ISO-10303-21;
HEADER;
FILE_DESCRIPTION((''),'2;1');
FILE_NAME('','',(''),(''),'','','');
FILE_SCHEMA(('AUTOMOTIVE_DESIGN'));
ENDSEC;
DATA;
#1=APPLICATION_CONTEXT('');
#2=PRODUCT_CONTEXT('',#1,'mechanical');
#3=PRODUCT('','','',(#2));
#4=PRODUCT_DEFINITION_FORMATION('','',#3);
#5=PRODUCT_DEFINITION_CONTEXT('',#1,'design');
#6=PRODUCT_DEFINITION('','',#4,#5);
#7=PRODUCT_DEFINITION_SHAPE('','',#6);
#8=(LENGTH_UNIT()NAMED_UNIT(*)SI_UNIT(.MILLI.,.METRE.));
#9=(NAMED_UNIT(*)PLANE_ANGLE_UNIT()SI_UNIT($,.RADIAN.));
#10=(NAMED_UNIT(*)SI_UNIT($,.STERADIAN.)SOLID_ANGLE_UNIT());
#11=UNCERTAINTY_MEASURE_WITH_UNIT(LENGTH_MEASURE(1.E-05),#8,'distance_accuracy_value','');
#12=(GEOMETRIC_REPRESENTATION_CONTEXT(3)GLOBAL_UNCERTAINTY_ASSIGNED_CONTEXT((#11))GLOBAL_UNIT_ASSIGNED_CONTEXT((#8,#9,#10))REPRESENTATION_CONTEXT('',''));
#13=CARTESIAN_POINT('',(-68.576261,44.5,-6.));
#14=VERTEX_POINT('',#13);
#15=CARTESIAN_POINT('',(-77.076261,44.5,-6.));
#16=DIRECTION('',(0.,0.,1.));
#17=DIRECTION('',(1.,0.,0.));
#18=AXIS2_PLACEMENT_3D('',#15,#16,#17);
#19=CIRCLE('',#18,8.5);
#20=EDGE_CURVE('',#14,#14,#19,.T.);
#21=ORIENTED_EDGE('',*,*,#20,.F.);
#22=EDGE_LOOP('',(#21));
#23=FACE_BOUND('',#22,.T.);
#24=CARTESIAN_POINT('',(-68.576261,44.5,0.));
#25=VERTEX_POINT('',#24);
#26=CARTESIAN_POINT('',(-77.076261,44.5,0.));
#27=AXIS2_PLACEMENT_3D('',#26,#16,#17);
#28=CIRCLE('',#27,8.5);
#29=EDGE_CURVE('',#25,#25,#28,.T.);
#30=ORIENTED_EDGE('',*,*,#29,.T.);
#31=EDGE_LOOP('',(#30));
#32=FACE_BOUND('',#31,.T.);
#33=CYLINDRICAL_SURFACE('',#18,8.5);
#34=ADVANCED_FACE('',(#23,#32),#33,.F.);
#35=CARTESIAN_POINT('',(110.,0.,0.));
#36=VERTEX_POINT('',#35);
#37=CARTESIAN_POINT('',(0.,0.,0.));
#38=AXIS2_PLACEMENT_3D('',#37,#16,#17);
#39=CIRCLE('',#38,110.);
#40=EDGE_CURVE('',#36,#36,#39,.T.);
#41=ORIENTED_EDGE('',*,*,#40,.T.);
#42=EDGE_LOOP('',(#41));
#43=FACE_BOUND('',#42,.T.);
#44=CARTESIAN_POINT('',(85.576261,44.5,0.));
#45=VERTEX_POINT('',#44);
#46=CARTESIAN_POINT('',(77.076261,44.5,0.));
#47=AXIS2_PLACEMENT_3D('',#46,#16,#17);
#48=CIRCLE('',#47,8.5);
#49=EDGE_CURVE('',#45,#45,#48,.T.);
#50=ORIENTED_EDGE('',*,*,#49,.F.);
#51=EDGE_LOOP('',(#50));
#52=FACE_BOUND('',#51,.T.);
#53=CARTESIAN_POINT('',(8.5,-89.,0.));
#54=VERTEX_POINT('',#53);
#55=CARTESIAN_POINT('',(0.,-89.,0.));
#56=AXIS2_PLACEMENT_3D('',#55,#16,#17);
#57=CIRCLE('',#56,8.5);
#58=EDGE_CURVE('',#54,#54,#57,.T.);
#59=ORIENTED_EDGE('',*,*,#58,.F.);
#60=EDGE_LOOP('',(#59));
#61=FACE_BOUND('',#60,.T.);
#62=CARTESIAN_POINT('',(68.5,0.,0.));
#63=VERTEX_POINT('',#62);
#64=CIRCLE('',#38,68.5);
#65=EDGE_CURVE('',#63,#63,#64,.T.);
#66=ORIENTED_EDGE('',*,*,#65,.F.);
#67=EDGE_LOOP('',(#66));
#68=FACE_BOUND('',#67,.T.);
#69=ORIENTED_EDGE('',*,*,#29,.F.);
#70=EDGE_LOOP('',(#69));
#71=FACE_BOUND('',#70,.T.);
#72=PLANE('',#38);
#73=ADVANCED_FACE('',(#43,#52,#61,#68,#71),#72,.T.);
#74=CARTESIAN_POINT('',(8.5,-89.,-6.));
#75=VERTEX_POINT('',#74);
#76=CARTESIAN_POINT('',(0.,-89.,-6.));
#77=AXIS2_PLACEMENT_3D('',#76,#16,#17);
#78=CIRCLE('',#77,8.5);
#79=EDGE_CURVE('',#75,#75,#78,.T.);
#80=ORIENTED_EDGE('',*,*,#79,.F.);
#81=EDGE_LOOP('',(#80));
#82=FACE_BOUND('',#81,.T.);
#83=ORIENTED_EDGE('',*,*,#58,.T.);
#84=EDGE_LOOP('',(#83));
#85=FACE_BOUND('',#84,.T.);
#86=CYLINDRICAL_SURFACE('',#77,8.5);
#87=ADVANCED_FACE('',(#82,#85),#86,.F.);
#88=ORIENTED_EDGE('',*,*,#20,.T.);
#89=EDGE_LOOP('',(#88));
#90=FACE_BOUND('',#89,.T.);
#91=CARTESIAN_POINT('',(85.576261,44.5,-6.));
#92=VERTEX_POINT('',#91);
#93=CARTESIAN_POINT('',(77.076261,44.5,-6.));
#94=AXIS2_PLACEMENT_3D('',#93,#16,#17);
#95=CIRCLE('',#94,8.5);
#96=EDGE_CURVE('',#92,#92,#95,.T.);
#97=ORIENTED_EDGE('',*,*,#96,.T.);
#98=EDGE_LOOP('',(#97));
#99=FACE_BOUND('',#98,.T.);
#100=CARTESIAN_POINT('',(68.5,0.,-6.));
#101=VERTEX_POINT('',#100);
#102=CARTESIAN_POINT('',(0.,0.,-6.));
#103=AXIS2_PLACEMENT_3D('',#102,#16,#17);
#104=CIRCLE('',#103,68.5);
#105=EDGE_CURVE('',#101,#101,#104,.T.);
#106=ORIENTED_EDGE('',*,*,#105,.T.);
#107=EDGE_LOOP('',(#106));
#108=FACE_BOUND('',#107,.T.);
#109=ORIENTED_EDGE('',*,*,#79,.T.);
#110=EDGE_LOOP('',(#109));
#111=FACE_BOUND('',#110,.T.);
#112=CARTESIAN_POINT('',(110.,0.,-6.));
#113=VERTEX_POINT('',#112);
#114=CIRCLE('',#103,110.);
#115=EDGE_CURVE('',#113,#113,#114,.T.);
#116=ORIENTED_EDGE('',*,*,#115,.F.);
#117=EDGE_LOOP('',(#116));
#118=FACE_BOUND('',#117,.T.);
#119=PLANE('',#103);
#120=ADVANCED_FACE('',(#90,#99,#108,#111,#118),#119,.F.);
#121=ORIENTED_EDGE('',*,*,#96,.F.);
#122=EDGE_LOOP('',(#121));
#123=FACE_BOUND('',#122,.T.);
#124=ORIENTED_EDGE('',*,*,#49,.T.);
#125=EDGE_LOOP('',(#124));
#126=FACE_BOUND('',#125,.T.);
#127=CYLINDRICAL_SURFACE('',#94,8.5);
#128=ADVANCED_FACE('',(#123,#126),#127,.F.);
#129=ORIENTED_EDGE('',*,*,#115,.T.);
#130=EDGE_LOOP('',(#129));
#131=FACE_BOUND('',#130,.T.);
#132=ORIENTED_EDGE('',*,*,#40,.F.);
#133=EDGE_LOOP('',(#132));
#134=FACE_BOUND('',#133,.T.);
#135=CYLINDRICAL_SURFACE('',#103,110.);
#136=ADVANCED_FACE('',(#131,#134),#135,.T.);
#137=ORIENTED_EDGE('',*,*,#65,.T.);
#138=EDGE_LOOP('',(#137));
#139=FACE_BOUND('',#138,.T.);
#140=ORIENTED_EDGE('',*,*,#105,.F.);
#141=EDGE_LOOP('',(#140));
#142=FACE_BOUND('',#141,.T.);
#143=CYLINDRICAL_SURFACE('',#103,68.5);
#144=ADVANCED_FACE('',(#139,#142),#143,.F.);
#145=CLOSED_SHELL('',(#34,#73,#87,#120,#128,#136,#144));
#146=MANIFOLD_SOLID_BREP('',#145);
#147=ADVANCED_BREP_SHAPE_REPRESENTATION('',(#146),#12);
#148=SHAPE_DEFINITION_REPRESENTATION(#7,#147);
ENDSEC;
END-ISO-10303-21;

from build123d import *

# Parameters (mm, degrees)
SKETCH_1_R             = 110
SKETCH_1_R_2           = 68.5
SKETCH_1_R_3           = 8.5
SM_BASE_FLANGE_1_DEPTH = 6


# Sheet-metal steps are written as plain solids
with BuildPart() as part:
    # Sketch 1 → Базовая кромка1 (new body)
    with BuildSketch(Plane.XY):
        Circle(SKETCH_1_R)
        Circle(SKETCH_1_R_2, mode=Mode.SUBTRACT)
        with Locations((77.076260937, 44.5)):
            Circle(SKETCH_1_R_3, mode=Mode.SUBTRACT)
        with Locations((0, -89)):
            Circle(SKETCH_1_R_3, mode=Mode.SUBTRACT)
        with Locations((-77.076260937, 44.5)):
            Circle(SKETCH_1_R_3, mode=Mode.SUBTRACT)
    extrude(amount=-SM_BASE_FLANGE_1_DEPTH)


solid = part.part
